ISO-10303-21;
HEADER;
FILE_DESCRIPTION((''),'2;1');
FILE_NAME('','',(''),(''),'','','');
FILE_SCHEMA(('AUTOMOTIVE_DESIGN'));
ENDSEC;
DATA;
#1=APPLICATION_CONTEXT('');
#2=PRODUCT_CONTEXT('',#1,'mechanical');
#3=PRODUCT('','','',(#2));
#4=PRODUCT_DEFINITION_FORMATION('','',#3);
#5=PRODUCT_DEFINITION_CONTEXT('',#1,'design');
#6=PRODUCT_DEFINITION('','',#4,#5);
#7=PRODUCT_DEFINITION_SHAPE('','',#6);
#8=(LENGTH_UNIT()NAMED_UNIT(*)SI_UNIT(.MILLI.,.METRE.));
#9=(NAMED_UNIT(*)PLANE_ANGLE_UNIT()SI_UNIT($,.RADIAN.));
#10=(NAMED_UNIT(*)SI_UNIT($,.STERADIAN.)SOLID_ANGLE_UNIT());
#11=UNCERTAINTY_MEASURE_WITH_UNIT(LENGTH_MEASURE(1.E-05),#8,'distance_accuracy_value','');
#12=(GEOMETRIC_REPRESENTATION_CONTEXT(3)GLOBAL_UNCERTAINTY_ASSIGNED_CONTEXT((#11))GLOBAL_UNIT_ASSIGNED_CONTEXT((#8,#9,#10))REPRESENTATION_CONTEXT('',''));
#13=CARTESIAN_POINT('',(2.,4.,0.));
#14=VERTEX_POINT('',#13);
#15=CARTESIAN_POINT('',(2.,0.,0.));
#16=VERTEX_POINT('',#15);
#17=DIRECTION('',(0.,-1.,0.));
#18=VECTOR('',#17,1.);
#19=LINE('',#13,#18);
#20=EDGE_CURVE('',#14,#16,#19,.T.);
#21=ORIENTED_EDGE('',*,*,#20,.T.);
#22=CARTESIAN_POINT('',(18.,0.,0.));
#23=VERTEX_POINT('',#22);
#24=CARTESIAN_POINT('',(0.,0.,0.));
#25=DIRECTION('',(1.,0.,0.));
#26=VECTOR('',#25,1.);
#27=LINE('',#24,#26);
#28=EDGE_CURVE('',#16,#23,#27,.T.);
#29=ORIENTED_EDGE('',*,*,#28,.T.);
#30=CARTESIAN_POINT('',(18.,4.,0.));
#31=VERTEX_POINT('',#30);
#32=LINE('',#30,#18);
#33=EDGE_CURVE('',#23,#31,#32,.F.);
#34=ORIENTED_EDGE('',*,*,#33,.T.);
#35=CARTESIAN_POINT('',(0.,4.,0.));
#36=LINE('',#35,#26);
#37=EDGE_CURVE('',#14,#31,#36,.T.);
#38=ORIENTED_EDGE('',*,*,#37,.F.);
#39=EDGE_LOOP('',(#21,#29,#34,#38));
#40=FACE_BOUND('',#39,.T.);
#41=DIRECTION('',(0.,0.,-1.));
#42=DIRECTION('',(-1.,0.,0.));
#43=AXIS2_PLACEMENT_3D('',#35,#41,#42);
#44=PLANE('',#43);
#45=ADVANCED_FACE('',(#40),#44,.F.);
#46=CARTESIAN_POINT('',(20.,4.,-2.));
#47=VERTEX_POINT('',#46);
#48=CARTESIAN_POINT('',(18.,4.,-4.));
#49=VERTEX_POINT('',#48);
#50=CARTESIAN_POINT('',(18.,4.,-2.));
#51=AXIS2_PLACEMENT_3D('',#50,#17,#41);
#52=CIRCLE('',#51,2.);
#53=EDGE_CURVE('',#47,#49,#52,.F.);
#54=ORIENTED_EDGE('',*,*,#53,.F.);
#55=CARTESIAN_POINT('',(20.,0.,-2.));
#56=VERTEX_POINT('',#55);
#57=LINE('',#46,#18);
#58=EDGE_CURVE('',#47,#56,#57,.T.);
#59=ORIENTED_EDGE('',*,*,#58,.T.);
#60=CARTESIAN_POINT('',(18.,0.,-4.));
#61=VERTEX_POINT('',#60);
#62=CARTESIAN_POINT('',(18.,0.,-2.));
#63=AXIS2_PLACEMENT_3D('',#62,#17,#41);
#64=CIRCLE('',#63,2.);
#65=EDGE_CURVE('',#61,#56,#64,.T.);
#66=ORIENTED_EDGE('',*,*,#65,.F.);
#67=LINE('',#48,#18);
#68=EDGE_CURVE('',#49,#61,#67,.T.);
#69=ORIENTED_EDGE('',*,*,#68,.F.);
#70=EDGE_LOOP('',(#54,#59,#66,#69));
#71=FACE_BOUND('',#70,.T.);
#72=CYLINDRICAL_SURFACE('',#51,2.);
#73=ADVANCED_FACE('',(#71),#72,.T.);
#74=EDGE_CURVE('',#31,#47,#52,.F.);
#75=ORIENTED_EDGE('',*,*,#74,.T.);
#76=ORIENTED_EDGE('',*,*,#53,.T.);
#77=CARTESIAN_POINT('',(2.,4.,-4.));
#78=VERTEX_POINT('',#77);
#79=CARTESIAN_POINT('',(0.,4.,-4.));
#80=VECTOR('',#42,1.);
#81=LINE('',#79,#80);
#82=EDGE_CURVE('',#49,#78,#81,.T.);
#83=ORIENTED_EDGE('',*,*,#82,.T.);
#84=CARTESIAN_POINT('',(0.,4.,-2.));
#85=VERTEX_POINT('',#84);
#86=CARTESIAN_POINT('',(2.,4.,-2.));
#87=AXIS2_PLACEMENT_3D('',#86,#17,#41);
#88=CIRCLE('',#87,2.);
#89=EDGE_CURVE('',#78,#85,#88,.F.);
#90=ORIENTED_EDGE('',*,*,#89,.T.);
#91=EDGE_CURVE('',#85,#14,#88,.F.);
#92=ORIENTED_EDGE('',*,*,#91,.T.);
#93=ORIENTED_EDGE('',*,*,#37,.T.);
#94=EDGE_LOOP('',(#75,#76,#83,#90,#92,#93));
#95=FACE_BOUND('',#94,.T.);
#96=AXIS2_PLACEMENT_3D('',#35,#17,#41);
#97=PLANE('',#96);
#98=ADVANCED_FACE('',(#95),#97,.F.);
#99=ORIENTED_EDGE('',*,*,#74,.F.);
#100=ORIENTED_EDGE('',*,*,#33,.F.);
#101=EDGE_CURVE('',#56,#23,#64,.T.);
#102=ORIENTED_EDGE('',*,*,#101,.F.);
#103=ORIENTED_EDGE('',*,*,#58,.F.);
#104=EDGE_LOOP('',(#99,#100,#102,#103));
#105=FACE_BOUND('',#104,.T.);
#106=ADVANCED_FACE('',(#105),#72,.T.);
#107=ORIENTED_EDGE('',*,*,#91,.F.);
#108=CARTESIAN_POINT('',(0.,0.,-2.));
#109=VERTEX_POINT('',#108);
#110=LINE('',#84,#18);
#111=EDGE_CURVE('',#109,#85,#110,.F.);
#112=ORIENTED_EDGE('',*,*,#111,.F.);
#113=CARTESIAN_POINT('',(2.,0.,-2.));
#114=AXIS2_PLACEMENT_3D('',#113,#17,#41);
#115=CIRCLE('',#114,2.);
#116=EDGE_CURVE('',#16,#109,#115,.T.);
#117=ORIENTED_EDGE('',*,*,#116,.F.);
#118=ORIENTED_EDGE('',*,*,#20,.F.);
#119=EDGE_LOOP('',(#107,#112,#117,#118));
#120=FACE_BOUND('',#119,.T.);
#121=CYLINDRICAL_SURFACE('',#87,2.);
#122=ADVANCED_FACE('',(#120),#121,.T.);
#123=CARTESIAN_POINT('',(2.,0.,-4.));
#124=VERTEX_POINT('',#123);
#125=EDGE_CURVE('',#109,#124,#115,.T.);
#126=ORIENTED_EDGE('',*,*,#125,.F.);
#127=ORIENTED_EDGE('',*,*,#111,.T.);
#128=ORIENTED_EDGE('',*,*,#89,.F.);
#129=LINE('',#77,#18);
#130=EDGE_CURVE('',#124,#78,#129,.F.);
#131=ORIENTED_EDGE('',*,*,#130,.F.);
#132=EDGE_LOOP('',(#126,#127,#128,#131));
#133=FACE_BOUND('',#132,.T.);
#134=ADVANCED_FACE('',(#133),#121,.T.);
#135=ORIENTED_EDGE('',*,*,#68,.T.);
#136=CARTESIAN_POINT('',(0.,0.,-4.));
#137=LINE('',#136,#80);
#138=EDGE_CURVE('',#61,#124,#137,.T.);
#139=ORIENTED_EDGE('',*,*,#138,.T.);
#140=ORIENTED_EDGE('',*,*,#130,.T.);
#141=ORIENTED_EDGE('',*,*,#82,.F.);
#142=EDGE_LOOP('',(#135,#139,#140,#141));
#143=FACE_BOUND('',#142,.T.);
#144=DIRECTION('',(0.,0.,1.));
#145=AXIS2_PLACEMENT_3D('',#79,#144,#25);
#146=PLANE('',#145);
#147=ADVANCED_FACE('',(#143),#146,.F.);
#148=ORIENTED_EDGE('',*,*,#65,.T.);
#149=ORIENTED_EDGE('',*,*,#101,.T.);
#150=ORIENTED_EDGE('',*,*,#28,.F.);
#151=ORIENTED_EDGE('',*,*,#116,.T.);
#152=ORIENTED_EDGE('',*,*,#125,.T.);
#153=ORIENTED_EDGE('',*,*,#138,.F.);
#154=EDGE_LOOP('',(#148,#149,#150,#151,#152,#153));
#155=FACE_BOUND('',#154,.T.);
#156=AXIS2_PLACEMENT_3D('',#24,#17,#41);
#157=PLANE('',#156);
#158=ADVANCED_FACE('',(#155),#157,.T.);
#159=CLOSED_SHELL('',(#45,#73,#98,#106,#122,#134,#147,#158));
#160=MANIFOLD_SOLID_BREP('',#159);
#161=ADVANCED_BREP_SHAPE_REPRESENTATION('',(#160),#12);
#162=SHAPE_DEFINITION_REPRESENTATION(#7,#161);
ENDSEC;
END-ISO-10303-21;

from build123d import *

# Parameters (mm, degrees)
SKETCH1_W      = 20
SKETCH1_H      = 4
EXTRUDE1_DEPTH = 4
FILLET1_R      = 2


with BuildPart() as part:
    # Sketch1 → Extrude1 (new body)
    with BuildSketch(Plane(origin=(0, 0, 0), x_dir=(1, 0, 0), z_dir=(0, 1, 0))):
        with Locations((10, 2)):
            Rectangle(SKETCH1_W, SKETCH1_H)
    extrude(amount=EXTRUDE1_DEPTH)

    # Fillet1
    fillet1_edges = [part.edges().sort_by_distance(p)[0] for p in [
        (0, 2, -4),
        (0, 2, 0),
        (20, 2, -4),
        (20, 2, 0),
    ]]
    fillet(fillet1_edges, radius=FILLET1_R - 0.0001)  # a hair under: the kernel refuses the full size


solid = part.part
